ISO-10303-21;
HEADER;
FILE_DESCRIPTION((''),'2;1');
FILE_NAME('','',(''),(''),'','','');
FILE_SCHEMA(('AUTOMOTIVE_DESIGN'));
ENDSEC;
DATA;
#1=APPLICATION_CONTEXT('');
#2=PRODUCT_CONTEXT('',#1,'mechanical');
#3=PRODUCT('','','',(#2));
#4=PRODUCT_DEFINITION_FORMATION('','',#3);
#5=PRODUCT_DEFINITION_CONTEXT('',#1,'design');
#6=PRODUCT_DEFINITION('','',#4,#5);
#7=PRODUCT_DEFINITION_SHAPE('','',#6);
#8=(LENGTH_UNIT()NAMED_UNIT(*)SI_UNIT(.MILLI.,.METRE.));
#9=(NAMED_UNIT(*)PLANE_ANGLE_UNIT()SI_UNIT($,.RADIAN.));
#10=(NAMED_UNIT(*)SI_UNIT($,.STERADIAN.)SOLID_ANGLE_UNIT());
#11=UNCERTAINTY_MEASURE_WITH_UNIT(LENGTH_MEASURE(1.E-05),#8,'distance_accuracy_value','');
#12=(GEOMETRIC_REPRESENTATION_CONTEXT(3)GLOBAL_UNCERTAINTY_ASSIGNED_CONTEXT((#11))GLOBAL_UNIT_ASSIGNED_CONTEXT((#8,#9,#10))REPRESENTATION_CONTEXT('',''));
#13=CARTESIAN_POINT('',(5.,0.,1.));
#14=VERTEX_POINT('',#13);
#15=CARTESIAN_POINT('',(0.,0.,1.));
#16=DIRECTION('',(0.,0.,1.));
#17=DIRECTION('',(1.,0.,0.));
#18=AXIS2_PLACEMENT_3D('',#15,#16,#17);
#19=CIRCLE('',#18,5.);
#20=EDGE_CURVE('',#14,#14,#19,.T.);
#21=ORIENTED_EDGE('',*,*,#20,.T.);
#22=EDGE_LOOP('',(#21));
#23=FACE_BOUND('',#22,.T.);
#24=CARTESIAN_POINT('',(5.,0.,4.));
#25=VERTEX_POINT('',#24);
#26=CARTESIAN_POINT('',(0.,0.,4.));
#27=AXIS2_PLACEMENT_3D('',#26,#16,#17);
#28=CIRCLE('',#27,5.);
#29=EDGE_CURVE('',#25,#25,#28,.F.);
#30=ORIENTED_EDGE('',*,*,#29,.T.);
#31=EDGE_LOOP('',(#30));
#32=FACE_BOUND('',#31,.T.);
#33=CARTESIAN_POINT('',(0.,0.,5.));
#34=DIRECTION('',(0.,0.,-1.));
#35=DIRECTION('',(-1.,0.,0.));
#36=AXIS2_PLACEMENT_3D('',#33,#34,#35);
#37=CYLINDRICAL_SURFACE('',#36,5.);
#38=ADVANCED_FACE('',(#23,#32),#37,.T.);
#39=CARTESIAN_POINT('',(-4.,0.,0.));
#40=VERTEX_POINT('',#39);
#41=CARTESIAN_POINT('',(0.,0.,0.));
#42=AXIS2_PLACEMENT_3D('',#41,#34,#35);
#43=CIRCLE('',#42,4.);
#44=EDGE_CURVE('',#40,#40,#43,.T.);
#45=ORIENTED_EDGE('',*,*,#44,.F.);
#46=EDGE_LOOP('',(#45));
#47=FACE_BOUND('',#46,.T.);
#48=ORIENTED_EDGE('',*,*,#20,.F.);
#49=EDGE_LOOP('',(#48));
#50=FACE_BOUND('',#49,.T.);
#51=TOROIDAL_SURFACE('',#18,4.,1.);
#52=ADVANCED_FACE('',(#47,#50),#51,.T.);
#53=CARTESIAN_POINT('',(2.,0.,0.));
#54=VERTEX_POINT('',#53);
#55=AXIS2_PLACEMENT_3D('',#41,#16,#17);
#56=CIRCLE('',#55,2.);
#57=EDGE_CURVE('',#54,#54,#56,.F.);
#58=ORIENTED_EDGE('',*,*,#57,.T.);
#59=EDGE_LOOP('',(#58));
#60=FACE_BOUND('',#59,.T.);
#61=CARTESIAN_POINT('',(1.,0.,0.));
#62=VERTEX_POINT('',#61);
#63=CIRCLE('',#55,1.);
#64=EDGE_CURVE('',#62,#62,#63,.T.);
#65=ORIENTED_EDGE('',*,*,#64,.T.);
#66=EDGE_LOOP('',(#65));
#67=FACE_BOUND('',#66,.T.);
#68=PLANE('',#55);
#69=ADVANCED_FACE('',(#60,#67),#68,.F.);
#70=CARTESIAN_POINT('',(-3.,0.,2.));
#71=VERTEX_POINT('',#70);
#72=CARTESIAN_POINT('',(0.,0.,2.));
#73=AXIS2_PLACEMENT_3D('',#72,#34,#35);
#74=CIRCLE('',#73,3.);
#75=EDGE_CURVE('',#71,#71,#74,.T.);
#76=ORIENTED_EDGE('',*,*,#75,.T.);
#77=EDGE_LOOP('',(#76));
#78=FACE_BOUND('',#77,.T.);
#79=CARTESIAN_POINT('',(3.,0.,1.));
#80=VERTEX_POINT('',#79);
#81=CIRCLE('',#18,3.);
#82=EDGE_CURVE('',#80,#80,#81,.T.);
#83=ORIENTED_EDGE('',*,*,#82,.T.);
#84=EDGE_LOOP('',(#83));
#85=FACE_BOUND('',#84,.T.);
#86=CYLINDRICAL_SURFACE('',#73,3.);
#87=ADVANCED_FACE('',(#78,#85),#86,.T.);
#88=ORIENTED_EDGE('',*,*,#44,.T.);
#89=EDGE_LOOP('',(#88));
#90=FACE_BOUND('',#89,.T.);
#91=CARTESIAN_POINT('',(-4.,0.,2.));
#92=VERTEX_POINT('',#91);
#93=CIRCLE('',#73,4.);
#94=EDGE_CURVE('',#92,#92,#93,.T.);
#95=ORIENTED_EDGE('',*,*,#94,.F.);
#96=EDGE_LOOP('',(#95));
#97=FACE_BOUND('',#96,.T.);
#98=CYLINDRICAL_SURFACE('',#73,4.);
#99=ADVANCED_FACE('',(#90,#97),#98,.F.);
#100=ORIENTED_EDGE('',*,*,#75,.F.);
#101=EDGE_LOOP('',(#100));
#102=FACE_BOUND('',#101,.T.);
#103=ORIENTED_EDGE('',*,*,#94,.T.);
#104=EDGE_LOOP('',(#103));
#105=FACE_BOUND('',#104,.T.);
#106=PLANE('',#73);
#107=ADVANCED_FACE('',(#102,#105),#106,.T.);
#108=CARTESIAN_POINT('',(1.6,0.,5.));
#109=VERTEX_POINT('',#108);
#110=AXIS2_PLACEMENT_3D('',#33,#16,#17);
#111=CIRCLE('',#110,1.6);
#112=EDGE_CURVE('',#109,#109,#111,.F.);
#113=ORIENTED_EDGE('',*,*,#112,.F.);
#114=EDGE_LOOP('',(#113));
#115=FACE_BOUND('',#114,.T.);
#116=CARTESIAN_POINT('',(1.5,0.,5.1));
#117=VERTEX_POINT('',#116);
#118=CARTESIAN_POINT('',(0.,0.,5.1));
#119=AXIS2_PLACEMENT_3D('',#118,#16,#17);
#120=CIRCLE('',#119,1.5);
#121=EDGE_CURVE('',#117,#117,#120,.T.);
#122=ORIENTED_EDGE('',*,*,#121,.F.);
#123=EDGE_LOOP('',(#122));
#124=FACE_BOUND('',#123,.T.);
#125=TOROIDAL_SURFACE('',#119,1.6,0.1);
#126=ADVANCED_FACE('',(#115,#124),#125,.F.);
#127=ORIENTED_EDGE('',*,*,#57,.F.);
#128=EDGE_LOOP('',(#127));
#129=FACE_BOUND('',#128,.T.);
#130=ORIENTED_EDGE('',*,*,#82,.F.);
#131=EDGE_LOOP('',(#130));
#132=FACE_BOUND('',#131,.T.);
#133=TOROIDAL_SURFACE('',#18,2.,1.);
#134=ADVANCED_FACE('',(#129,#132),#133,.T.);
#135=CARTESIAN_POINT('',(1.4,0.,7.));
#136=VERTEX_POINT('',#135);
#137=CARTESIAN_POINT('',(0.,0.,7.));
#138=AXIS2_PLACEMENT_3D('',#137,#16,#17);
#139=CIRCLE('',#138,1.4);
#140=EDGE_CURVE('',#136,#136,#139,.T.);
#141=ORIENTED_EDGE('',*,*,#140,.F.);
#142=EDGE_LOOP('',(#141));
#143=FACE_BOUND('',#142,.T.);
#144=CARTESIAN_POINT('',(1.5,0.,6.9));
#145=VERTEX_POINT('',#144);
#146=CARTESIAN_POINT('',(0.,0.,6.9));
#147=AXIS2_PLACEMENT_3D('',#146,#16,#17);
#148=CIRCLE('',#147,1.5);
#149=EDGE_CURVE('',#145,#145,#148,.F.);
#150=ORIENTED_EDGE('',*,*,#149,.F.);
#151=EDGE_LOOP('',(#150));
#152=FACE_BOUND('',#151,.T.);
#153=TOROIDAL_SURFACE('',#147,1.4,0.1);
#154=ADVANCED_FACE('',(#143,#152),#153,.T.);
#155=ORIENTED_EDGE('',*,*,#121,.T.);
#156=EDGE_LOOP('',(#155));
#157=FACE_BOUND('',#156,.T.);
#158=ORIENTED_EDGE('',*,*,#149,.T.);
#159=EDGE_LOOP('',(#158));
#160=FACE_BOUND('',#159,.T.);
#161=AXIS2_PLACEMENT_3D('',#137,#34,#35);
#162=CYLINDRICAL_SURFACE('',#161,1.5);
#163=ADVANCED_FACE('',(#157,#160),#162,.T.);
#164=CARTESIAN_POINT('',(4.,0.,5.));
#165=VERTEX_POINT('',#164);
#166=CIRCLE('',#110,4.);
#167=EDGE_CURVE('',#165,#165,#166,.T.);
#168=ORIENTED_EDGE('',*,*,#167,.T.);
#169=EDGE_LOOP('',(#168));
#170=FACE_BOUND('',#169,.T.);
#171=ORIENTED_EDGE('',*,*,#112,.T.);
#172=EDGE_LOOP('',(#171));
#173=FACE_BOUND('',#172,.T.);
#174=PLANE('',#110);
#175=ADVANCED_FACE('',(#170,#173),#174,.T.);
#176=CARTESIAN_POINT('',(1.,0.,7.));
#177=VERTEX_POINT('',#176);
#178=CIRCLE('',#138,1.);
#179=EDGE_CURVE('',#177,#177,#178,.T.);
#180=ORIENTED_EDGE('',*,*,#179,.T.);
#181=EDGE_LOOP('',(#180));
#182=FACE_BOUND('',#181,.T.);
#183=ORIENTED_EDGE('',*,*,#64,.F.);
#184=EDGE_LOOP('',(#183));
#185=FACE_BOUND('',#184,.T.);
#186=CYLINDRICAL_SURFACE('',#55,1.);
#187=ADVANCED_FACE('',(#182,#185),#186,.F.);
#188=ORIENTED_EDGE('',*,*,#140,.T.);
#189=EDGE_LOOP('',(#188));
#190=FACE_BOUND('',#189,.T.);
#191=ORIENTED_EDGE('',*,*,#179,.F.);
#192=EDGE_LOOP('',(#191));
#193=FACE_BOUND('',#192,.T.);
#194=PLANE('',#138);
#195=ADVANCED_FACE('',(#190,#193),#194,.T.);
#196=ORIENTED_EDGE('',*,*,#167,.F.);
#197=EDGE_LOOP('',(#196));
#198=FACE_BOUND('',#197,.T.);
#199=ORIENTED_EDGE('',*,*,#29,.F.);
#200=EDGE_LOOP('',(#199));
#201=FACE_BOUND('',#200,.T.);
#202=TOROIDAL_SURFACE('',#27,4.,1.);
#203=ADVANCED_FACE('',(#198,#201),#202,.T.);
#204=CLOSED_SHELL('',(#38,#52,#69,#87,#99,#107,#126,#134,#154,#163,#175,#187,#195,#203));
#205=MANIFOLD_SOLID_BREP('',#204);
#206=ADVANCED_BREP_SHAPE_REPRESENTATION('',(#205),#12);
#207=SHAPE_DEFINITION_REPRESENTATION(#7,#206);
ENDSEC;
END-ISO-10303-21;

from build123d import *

# Parameters (mm, degrees)
ESQUISSE1_R             = 5
BOSS_EXTRU_1_DEPTH      = 5
ESQUISSE2_R             = 1.5
BOSS_EXTRU_2_DEPTH      = 2
ESQUISSE3_R             = 1
ENL_V_MAT_EXTRU_1_DEPTH = 10.949874371
ESQUISSE4_R             = 4
ESQUISSE4_R_2           = 3
ENL_V_MAT_EXTRU_2_DEPTH = 2
CONG_1_R                = 1
CONG_2_R                = 1
CONG_3_R                = 0.1


with BuildPart() as part:
    # Esquisse1 → Boss.-Extru.1 (new body)
    with BuildSketch(Plane.XY):
        Circle(ESQUISSE1_R)
    extrude(amount=BOSS_EXTRU_1_DEPTH)

    # Esquisse2 → Boss.-Extru.2 (add)
    with BuildSketch(Plane.XY.offset(5)):
        Circle(ESQUISSE2_R)
    extrude(amount=BOSS_EXTRU_2_DEPTH)

    # Esquisse3 → Enlèv. mat.-Extru.1 (cut, through all)
    with BuildSketch(Plane.XY.offset(7)):
        Circle(ESQUISSE3_R)
    extrude(amount=-ENL_V_MAT_EXTRU_1_DEPTH, mode=Mode.SUBTRACT)

    # Esquisse4 → Enlèv. mat.-Extru.2 (cut)
    with BuildSketch(Plane(origin=(0, 0, 0), x_dir=(-1, 0, 0), z_dir=(0, 0, -1))):
        Circle(ESQUISSE4_R)
        Circle(ESQUISSE4_R_2, mode=Mode.SUBTRACT)
    extrude(amount=-ENL_V_MAT_EXTRU_2_DEPTH, mode=Mode.SUBTRACT)

    # Congé1
    cong_1_edges = [part.edges().sort_by_distance(p)[0] for p in [
        (3, 0, 0),
        (-5, 0, 0),
    ]]
    fillet(cong_1_edges, radius=CONG_1_R - 0.0001)  # a hair under: the kernel refuses the full size

    # Congé2
    cong_2_edges = [part.edges().sort_by_distance(p)[0] for p in [
        (-5, 0, 5),
    ]]
    fillet(cong_2_edges, radius=CONG_2_R)

    # Congé3
    cong_3_edges = [part.edges().sort_by_distance(p)[0] for p in [
        (-1.5, 0, 5),
        (-1.5, 0, 7),
    ]]
    fillet(cong_3_edges, radius=CONG_3_R)


solid = part.part
